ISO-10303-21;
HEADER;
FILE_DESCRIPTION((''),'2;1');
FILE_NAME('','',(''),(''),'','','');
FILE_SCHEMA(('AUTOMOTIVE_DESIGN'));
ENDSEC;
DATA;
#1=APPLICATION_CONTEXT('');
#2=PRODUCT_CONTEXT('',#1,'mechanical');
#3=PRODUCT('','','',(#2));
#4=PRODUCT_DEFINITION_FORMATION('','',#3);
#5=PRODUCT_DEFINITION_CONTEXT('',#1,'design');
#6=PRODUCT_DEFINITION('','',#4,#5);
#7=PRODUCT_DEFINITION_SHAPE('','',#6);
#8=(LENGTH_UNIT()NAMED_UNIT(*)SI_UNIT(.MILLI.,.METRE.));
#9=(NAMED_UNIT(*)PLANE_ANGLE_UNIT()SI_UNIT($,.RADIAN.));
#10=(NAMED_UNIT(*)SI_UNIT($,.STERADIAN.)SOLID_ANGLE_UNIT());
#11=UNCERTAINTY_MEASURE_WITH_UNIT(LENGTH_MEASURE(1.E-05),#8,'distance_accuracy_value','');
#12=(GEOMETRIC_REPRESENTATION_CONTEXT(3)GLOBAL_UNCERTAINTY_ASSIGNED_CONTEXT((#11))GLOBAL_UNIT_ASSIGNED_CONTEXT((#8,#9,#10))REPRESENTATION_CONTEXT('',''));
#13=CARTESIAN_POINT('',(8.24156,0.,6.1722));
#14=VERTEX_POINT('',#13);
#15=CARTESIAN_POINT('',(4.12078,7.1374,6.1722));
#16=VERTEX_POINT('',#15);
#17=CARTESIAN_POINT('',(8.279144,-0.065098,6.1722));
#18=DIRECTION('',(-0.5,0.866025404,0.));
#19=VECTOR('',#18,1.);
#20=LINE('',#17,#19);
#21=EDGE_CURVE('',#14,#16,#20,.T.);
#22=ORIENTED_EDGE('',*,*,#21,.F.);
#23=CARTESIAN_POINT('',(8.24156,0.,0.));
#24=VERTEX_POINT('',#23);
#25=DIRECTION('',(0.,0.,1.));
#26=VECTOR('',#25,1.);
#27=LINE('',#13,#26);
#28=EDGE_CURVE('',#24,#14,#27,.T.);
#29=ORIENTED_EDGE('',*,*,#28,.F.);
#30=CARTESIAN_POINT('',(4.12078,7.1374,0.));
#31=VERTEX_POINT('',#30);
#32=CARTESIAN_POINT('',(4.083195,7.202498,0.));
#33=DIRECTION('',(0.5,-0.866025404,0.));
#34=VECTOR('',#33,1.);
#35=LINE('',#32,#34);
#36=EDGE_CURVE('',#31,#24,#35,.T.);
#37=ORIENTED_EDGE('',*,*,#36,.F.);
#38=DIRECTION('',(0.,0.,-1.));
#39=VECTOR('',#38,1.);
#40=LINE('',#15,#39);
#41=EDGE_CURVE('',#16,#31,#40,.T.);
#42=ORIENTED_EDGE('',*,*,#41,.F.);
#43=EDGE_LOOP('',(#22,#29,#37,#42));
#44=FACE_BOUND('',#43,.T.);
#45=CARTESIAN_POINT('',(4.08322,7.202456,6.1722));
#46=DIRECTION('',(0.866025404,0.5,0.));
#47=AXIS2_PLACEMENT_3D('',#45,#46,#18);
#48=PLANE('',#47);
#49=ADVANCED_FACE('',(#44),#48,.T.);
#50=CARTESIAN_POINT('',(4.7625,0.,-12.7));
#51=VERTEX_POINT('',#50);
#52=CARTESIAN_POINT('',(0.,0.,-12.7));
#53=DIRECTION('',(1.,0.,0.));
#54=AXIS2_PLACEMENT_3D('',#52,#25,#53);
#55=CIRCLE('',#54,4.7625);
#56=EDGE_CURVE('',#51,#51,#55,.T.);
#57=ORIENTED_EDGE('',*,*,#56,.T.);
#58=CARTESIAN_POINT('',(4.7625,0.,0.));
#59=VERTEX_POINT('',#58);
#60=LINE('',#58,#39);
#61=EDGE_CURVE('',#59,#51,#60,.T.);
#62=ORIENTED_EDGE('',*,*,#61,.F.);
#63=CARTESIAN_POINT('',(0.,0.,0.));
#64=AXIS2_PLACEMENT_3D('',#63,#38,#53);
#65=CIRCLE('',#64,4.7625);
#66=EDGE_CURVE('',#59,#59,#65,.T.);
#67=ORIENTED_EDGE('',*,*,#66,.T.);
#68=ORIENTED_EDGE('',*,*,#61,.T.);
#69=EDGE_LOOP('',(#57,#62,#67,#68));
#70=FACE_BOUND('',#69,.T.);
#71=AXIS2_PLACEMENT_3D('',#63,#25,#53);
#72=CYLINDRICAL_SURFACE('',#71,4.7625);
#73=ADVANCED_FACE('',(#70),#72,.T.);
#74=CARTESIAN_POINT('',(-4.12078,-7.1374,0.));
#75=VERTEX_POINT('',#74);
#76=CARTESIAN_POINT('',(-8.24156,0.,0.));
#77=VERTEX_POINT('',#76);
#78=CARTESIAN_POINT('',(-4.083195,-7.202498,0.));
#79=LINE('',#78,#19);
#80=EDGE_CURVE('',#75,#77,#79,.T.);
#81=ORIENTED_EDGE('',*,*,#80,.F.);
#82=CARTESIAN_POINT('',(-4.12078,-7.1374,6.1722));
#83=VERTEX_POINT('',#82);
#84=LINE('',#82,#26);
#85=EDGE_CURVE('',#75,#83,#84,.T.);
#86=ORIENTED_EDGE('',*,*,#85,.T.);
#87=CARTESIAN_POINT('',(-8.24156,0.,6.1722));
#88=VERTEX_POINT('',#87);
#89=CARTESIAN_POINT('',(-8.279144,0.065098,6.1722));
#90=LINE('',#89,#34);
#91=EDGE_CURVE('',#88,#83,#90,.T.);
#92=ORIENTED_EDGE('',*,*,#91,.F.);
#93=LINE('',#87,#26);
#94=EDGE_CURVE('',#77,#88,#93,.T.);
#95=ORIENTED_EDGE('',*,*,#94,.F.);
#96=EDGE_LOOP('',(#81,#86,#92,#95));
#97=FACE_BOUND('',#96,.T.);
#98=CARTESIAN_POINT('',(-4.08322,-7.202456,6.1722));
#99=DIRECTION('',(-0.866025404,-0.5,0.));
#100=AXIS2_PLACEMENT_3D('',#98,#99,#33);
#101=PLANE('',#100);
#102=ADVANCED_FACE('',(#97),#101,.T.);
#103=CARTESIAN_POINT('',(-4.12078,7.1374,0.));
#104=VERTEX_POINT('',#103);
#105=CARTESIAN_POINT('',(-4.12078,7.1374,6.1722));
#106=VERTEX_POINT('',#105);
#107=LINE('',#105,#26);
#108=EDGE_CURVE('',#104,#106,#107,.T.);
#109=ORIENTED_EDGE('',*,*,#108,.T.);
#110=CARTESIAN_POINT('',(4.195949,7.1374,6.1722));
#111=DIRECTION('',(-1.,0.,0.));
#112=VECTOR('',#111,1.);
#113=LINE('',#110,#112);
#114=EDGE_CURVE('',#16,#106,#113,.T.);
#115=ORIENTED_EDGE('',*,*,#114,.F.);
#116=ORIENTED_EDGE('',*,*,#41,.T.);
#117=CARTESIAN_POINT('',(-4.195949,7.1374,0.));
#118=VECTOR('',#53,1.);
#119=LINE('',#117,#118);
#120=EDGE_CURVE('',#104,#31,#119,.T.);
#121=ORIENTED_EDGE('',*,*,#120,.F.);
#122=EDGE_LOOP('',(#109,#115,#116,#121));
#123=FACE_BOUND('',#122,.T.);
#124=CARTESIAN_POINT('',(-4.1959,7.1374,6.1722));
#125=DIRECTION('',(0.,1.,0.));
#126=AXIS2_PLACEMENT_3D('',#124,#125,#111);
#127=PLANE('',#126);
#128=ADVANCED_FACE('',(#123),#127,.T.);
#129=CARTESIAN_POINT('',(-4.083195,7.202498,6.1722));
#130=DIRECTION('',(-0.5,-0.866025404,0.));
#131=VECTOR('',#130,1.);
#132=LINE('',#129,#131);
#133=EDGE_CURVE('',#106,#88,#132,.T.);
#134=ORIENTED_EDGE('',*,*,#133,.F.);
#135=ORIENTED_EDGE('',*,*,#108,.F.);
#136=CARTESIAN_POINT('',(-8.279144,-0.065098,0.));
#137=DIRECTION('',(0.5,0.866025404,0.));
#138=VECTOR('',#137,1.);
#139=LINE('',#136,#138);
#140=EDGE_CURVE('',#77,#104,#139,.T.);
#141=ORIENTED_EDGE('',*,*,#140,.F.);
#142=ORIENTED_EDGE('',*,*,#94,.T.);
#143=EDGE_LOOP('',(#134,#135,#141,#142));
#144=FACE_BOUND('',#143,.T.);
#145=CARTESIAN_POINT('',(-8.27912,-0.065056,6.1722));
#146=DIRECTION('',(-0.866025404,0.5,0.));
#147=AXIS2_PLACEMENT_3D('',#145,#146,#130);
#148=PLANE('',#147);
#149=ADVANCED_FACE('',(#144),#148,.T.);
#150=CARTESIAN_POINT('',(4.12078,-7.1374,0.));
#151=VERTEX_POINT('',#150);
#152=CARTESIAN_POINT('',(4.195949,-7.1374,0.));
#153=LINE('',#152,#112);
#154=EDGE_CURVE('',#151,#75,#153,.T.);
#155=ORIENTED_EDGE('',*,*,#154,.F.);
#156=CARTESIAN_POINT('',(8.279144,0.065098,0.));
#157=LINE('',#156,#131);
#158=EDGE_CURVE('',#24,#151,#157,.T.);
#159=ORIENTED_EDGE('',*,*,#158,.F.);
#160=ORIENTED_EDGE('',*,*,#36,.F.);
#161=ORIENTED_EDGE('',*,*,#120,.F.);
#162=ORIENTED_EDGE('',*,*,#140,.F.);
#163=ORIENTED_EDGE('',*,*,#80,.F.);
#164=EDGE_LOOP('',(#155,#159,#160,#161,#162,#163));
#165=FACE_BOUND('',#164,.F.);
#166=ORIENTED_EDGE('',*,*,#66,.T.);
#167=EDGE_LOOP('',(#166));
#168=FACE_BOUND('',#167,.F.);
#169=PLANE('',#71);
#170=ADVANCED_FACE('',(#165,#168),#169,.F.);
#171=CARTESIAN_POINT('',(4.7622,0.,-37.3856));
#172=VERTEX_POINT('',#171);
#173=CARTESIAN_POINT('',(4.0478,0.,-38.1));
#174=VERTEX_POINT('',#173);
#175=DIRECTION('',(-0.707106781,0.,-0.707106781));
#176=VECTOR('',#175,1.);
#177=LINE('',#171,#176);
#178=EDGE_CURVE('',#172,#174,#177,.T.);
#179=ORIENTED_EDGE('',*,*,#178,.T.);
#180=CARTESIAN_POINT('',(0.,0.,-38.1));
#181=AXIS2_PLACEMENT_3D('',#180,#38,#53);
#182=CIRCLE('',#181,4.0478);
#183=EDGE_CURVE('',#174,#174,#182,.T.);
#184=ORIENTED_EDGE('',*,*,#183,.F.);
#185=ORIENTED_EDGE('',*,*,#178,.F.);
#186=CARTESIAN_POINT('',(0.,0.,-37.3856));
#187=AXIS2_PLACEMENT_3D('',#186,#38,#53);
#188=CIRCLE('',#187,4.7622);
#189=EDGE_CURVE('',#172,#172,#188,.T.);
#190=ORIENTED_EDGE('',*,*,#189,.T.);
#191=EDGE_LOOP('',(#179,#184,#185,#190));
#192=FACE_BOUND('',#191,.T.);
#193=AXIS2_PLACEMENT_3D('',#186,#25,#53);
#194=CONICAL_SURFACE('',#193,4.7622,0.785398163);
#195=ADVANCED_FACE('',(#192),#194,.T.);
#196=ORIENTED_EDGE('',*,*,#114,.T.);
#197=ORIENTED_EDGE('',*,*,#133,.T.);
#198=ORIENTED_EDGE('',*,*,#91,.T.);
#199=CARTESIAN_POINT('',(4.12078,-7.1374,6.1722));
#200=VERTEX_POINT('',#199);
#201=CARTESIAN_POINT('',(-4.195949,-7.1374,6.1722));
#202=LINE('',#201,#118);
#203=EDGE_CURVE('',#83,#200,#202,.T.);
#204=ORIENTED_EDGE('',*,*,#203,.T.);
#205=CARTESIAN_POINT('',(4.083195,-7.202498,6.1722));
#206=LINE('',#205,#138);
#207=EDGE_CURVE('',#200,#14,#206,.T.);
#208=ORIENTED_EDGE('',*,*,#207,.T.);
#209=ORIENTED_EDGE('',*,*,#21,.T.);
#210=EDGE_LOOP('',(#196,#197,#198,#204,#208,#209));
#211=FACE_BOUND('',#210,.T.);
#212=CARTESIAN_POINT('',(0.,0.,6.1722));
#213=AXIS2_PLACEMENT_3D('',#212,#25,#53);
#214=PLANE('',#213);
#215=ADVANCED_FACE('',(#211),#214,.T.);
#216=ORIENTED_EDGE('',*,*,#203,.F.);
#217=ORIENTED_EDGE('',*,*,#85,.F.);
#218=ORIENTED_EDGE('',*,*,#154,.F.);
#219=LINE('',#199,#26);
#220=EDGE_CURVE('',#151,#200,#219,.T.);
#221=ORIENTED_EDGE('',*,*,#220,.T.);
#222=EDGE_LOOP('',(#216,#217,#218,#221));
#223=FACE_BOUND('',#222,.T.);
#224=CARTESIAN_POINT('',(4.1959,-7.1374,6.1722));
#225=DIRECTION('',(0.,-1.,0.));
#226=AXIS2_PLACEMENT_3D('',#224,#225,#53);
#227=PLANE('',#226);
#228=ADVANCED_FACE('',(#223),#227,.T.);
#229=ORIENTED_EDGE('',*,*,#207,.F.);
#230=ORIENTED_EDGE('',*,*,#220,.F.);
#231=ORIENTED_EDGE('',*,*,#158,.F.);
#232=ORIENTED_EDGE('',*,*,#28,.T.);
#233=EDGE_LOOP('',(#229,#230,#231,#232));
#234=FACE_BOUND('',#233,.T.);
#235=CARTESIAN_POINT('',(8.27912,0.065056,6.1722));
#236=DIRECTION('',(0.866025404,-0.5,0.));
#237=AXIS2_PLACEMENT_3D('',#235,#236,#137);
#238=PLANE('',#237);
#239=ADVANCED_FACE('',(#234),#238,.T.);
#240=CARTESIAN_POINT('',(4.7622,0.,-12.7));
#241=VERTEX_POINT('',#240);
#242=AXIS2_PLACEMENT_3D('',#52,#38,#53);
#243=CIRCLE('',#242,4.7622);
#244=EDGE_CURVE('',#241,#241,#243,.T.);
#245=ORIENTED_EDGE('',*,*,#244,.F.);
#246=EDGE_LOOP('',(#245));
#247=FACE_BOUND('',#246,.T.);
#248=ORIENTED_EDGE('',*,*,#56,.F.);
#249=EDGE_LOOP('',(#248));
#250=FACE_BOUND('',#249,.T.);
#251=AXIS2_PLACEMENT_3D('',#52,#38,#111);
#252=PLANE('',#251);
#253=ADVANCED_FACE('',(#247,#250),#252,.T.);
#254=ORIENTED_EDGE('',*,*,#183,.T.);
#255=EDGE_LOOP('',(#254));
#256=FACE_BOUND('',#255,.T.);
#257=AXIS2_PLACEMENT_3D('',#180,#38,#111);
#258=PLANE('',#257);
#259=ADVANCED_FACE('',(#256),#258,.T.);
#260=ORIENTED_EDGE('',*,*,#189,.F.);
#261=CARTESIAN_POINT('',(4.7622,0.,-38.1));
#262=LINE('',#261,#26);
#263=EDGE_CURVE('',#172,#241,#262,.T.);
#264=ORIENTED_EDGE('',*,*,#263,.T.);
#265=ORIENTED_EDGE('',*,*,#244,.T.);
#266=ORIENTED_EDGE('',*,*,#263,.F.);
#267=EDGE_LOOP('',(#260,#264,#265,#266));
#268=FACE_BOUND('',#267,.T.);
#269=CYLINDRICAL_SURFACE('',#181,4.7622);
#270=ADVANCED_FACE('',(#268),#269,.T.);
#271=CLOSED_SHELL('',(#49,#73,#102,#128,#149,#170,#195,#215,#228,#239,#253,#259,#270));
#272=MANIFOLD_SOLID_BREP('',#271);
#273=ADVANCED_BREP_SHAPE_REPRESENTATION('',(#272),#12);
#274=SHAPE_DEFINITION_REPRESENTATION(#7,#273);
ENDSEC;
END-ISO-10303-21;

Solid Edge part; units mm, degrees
sketch "Sketch1" plane through (0, 0, 0) normal (0, 0, 1) x (1, 0, 0)
  circle A0 centre (0, 0) radius 8.2794
  dimension "D1" = 16.5588
extrude "Protrusion1" add sketch "Sketch1" along normal blind 6.1722
sketch "Sketch2" plane through (0, 0, 0) normal (0, 0, -1) x (1, 0, 0)
  circle A0 centre (0, 0) radius 4.7625
extrude "Protrusion2" add sketch "Sketch2" along normal blind 38.1
sketch "Sketch3" plane through (0, 0, -38.1) normal (0, 0, -1) x (1, 0, 0)
  circle A0 centre (0, 0) radius 4.7622
extrude "Cutout1" cut sketch "Sketch3" against normal blind 25.4 flip side to cut
chamfer "Chamfer_1" distance 0.7144 angle 45 1 edges at (-4.7622, 0, -38.1)
sketch "Sketch4" plane through (0, 0, 6.1722) normal (0, 0, 1) x (1, 0, 0)
  line L0 (-4.1959, 7.1374) -> (4.1959, 7.1374)
  dimension "D1" = 14.2748
extrude "Cutout2" cut sketch "Sketch4" against normal up to next material side at (0, 7.1874, 6.1722)
pattern_circular "Pattern1" count 6 over 360 about axis through (0, 0, 6.1722) along (0, 0, 1) of "Cutout2"
properties part number "24100384"
